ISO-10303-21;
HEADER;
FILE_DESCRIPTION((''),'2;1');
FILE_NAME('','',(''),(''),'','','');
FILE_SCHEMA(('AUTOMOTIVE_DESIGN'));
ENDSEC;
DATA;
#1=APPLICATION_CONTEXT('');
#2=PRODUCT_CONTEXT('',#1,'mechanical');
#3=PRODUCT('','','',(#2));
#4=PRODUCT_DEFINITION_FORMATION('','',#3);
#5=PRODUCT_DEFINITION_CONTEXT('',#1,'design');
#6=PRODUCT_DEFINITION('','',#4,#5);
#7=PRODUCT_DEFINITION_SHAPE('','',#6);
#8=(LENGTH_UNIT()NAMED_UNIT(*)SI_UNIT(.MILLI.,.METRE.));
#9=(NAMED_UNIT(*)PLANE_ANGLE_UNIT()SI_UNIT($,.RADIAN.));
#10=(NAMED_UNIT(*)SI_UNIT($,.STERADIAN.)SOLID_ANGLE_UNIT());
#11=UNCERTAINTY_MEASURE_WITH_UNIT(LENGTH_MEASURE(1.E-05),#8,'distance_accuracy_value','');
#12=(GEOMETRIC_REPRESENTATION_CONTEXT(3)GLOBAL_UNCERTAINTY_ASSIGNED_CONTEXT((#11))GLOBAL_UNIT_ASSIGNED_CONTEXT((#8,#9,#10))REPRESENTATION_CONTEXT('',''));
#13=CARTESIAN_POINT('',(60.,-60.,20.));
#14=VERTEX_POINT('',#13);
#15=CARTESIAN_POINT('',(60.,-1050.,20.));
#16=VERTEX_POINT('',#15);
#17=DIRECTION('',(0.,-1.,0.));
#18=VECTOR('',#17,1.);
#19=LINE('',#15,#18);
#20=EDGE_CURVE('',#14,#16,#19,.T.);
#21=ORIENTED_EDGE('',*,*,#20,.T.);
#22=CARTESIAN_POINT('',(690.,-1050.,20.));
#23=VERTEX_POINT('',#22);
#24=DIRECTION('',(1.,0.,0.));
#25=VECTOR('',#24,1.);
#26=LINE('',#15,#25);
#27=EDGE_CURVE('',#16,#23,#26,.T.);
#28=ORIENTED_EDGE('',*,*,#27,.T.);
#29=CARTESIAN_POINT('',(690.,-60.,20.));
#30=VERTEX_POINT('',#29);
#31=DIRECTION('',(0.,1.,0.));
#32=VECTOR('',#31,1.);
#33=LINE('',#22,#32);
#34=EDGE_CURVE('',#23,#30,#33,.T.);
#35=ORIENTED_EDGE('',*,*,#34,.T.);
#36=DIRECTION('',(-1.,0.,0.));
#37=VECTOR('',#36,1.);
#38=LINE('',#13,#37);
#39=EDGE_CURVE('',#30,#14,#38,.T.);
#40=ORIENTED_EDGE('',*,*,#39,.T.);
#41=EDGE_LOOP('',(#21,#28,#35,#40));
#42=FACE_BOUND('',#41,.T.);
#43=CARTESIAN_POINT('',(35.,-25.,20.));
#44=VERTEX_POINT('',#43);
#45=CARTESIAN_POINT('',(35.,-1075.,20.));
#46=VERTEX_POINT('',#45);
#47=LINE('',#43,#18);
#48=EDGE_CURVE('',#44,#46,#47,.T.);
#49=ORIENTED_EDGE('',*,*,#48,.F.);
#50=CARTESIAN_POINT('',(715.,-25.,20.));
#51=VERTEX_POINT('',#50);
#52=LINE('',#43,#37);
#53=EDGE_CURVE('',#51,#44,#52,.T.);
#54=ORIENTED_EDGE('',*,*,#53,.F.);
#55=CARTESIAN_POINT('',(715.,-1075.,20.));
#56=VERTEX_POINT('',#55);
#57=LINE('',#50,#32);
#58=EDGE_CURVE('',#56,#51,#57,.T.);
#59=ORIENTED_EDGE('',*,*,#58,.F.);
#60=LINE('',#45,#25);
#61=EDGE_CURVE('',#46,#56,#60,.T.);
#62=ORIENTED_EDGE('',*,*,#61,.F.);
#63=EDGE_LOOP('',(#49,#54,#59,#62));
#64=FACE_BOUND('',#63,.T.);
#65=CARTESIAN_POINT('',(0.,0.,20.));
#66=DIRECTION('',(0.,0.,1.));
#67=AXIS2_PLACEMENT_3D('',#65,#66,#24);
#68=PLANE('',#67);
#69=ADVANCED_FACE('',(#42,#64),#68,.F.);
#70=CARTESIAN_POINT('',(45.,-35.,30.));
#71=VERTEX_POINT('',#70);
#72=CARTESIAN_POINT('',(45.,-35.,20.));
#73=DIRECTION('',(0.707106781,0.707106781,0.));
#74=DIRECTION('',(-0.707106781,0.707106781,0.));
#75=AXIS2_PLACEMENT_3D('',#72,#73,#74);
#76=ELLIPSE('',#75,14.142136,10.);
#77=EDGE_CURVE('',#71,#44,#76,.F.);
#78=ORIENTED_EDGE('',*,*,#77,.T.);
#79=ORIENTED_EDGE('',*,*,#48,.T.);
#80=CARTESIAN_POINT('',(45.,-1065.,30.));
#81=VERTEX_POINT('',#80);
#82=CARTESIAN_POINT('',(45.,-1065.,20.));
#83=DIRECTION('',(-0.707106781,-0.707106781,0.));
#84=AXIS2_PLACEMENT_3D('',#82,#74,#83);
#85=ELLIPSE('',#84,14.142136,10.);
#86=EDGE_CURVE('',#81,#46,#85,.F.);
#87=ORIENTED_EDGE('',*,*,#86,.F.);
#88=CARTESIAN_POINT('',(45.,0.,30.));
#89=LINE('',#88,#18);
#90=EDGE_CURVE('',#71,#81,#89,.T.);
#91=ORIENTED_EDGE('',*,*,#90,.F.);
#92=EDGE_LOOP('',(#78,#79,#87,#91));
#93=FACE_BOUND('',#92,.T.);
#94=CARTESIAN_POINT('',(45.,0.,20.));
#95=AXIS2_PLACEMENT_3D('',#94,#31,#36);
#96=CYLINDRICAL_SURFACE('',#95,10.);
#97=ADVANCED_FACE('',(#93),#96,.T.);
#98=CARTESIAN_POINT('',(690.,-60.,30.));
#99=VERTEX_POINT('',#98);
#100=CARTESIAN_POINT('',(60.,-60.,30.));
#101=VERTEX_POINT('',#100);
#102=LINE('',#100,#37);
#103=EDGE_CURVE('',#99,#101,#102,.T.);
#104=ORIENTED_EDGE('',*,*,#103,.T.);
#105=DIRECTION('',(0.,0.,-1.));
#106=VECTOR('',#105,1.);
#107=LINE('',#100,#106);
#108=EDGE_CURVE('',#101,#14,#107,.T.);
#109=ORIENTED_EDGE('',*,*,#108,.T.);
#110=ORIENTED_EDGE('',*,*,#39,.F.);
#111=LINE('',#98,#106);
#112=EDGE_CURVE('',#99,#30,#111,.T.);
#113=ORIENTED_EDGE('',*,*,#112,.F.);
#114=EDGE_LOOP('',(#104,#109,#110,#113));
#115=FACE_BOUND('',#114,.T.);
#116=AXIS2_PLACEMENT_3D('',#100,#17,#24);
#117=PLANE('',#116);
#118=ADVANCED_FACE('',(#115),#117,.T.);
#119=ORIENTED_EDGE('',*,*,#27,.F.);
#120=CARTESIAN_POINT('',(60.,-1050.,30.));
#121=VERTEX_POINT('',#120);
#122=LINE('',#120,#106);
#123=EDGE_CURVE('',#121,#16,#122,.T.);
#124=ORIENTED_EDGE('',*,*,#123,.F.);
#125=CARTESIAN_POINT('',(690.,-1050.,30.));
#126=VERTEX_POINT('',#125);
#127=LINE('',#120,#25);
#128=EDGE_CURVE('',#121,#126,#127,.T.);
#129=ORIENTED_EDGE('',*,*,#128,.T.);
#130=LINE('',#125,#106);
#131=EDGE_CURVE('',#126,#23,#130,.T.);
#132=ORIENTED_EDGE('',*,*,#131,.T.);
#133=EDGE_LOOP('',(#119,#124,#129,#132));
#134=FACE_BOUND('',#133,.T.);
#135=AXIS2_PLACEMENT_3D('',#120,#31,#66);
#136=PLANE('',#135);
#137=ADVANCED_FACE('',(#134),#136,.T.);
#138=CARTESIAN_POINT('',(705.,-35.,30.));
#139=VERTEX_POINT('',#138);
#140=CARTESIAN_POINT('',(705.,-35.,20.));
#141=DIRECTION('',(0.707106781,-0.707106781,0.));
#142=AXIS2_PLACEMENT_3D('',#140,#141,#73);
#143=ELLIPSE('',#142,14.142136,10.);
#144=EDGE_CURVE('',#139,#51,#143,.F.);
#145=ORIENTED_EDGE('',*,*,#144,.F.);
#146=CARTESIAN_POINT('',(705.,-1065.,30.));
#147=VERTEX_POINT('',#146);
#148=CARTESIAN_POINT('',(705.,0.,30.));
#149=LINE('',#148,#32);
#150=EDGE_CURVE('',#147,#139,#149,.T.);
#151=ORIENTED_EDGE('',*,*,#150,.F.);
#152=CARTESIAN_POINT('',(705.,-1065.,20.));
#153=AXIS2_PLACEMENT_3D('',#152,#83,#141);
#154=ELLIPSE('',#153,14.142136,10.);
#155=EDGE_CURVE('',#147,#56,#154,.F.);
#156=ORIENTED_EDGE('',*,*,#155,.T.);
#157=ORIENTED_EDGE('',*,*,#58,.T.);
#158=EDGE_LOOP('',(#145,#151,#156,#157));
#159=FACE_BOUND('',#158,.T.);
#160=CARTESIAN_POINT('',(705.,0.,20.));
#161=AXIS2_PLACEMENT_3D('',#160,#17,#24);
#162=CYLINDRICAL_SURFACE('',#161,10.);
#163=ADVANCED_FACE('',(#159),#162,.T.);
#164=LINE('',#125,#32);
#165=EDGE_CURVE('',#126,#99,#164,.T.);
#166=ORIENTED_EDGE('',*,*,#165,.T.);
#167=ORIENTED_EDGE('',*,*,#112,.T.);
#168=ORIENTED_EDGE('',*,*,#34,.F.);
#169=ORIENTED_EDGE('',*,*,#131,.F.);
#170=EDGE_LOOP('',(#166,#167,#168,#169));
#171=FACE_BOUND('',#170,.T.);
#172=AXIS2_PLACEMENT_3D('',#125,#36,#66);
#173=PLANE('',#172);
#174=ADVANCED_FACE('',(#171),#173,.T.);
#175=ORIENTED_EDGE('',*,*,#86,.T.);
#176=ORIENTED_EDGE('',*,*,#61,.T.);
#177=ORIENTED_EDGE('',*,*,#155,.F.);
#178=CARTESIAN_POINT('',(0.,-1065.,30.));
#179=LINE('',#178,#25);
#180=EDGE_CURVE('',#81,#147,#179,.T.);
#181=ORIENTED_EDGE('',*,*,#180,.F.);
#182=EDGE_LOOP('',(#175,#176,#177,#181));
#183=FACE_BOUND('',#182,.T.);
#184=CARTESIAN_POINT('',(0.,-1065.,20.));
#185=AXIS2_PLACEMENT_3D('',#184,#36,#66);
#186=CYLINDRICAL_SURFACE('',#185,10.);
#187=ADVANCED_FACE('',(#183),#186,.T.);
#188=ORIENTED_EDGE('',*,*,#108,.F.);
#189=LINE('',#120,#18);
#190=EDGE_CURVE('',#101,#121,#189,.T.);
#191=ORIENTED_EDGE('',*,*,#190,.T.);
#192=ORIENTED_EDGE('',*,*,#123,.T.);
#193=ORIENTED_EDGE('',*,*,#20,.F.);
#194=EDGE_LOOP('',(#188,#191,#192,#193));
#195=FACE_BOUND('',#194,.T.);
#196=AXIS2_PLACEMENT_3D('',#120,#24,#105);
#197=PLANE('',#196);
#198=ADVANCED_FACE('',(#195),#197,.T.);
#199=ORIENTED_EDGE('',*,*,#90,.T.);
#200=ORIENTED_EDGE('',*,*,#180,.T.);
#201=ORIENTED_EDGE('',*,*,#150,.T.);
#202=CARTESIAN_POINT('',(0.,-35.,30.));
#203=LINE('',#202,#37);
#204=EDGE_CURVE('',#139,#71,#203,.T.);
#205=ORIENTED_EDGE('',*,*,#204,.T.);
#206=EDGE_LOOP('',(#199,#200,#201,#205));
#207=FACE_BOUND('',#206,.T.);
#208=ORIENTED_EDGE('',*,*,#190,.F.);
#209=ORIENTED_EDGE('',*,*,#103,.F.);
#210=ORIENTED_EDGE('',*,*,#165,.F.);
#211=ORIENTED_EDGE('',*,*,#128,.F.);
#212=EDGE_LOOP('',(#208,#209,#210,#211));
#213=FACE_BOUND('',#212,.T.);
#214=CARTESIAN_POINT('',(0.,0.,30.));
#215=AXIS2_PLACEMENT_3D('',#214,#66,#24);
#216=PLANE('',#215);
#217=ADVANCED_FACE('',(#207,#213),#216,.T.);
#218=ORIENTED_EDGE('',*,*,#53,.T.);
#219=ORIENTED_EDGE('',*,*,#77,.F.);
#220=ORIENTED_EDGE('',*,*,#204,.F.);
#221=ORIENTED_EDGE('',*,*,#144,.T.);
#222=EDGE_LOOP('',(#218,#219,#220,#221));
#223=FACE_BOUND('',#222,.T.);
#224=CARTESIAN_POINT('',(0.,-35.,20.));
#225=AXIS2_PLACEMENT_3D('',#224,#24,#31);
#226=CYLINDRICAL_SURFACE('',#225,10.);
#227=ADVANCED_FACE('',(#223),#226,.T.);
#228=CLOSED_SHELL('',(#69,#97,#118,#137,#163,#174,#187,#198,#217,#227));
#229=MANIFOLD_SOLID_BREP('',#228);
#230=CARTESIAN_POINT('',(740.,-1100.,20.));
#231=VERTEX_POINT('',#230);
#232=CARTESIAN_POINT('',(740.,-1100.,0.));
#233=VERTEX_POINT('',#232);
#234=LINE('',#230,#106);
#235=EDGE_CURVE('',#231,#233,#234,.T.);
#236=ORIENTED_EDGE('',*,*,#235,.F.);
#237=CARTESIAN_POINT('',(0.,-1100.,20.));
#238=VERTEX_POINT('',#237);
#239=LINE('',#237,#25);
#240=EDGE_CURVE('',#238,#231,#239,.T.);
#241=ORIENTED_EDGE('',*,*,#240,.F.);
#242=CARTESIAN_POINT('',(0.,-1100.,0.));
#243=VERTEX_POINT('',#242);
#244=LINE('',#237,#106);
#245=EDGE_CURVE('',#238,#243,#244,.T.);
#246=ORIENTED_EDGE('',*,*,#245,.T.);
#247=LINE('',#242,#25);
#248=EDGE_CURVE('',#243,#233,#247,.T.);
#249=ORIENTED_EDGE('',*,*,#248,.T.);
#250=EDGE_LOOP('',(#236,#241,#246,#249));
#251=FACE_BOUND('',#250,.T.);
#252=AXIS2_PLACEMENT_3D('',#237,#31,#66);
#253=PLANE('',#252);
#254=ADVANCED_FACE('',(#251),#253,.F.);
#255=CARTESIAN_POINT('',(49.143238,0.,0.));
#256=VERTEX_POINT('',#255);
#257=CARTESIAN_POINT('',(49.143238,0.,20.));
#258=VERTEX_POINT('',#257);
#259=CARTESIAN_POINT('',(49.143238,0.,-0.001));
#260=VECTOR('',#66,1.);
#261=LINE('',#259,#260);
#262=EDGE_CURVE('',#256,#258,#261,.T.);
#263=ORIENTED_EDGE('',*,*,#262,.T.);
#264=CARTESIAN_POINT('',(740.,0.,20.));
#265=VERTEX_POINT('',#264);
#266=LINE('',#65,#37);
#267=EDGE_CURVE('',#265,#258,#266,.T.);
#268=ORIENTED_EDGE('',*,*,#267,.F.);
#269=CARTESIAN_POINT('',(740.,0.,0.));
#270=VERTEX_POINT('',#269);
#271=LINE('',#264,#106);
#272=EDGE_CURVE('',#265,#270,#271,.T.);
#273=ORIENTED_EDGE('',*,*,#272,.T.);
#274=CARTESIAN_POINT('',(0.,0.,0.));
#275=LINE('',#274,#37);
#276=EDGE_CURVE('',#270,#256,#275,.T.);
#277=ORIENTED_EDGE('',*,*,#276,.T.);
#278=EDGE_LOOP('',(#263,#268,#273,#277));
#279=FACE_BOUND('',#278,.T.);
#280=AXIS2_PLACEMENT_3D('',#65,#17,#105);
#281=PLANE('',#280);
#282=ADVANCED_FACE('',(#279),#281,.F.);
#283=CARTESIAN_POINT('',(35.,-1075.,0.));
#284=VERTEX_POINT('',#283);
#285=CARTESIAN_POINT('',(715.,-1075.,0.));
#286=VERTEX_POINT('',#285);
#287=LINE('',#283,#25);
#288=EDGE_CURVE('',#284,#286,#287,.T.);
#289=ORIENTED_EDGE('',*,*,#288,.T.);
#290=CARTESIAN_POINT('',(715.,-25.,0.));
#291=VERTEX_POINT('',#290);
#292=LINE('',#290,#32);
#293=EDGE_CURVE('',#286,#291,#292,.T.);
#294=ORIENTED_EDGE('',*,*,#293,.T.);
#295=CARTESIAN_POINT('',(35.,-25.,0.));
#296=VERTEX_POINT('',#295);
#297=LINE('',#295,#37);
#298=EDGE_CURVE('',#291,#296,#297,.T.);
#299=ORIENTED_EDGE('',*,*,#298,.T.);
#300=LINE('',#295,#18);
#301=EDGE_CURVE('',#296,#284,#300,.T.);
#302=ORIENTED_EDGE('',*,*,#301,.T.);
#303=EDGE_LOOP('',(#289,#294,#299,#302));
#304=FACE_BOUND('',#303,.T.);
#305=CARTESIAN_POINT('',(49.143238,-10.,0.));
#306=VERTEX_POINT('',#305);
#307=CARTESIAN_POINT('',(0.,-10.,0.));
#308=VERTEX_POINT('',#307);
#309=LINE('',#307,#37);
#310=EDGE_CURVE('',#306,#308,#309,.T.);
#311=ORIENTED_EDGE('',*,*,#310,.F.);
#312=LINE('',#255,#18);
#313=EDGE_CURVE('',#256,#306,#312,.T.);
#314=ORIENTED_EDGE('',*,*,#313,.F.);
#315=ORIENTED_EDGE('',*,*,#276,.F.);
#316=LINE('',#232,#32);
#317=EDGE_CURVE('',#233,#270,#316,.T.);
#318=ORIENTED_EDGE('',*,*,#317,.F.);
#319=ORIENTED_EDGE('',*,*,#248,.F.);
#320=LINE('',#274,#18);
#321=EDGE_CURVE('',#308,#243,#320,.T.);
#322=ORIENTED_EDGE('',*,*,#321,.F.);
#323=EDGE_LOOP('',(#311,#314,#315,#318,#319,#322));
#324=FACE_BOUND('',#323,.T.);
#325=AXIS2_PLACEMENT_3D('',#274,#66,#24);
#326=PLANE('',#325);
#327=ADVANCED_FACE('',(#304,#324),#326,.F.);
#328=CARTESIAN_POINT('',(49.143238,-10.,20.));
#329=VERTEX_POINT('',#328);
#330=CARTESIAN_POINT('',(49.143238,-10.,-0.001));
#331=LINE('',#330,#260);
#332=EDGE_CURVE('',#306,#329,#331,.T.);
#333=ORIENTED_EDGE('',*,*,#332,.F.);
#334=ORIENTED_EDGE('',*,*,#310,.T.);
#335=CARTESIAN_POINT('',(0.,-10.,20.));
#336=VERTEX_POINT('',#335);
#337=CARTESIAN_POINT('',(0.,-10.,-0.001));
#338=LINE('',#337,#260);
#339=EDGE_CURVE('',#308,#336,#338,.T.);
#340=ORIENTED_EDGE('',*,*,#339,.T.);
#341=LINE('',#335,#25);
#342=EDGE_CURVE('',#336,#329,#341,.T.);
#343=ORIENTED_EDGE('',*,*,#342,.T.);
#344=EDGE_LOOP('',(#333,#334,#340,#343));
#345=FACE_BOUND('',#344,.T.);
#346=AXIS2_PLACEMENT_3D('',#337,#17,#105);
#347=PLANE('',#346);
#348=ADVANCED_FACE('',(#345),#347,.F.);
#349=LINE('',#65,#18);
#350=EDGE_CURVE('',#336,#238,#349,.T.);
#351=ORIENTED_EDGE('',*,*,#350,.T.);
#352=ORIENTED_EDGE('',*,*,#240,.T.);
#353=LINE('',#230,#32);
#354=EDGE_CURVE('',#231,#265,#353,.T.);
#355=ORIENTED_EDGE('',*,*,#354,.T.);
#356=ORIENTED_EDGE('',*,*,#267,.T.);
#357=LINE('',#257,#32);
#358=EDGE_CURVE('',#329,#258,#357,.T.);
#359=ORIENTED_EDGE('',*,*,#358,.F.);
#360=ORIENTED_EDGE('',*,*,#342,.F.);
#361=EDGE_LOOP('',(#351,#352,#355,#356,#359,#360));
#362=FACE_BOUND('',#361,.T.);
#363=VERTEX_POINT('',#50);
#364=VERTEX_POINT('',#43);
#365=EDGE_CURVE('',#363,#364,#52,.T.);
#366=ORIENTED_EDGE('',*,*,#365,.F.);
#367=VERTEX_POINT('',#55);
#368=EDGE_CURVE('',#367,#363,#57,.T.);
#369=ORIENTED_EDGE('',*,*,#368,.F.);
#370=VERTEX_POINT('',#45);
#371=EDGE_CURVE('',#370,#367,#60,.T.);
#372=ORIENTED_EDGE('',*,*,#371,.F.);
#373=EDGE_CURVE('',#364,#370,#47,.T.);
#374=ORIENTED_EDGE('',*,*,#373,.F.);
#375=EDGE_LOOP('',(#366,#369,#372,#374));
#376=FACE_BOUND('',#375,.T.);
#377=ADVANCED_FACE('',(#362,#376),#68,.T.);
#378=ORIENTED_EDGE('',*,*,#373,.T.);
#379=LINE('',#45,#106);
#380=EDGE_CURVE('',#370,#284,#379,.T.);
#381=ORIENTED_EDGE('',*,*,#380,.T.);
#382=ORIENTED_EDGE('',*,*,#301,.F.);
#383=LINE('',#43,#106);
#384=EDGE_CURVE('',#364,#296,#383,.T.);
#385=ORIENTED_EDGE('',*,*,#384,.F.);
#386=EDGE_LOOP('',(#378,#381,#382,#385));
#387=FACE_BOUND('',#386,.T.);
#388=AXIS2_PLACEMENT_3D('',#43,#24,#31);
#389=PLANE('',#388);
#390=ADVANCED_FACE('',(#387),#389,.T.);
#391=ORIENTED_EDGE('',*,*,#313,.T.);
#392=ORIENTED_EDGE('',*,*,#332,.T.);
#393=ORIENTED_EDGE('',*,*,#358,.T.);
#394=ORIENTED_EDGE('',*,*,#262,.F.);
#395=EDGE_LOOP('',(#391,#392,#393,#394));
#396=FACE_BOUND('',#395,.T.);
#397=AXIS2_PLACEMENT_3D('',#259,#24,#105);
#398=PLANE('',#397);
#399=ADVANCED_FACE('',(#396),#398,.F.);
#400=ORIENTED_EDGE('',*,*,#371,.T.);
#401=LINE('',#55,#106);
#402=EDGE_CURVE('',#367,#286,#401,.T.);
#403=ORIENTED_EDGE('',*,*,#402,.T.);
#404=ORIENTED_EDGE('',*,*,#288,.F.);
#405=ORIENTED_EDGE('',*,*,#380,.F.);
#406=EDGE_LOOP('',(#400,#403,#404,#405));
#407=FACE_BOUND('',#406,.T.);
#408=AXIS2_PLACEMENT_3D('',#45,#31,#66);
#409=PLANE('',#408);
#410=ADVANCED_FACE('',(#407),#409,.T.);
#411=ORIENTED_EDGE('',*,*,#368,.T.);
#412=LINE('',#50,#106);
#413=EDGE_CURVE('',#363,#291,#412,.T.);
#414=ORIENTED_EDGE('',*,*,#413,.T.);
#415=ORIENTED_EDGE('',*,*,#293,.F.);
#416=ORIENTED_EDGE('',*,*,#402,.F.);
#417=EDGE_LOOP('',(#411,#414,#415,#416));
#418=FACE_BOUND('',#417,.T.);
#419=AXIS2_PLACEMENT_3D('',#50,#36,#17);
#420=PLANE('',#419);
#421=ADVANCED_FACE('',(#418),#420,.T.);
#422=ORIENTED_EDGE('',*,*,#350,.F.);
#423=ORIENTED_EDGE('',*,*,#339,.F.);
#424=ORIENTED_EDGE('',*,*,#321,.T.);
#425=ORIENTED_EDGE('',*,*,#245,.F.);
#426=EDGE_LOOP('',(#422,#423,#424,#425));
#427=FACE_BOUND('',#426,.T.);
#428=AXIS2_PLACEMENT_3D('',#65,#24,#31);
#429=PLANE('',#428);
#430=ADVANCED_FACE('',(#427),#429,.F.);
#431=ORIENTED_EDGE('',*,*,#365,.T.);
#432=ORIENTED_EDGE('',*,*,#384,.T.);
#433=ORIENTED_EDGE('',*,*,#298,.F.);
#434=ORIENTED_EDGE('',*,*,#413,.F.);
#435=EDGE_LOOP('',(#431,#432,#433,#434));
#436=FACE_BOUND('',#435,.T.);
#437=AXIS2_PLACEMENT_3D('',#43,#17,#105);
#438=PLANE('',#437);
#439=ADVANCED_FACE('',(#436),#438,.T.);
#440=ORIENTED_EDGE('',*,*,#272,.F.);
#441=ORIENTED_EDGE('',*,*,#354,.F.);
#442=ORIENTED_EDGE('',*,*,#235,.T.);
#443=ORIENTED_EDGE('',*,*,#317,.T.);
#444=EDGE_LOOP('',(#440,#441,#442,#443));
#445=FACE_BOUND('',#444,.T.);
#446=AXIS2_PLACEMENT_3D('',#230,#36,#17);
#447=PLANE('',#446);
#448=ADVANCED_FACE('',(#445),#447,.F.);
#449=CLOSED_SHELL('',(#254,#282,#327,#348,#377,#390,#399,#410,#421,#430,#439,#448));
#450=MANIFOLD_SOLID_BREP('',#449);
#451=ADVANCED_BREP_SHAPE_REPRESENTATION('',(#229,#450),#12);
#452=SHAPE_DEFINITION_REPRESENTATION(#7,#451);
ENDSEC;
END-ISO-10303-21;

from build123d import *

# Parameters (mm, degrees)
ESBO_O2_W                = 740
ESBO_O2_H                = 1100
ESBO_O2_W_2              = 680
ESBO_O2_H_2              = 1050
RESSALTO_EXTRUS_O1_DEPTH = 20
ESBO_O3_W                = 680
ESBO_O3_H                = 1050
ESBO_O3_W_2              = 630
ESBO_O3_H_2              = 990
RESSALTO_EXTRUS_O2_DEPTH = 10
FILETE1_R                = 10
ESBO_O4_W                = 49.143238
ESBO_O4_H                = 10
CORTE_EXTRUS_O1_DEPTH    = 20


with BuildPart() as part:
    # Esboço2 → Ressalto-extrusão1 (new body)
    with BuildSketch(Plane.XY):
        with Locations((370, -550)):
            Rectangle(ESBO_O2_W, ESBO_O2_H)
        with Locations((375, -550)):
            Rectangle(ESBO_O2_W_2, ESBO_O2_H_2, mode=Mode.SUBTRACT)
    extrude(amount=RESSALTO_EXTRUS_O1_DEPTH)

    # Esboço4 → Corte-extrusão1 (cut)
    with BuildSketch(Plane.XY.offset(20)):
        with Locations((24.571619, -5)):
            Rectangle(ESBO_O4_W, ESBO_O4_H)
    extrude(amount=-CORTE_EXTRUS_O1_DEPTH, mode=Mode.SUBTRACT)


with BuildPart() as body_2:
    # Esboço3 → Ressalto-extrusão2 (new body)
    with BuildSketch(Plane.XY.offset(20)):
        with Locations((375, -550)):
            Rectangle(ESBO_O3_W, ESBO_O3_H)
        with Locations((375, -555)):
            Rectangle(ESBO_O3_W_2, ESBO_O3_H_2, mode=Mode.SUBTRACT)
    extrude(amount=RESSALTO_EXTRUS_O2_DEPTH)

    # Filete1
    filete1_edges = [body_2.edges().sort_by_distance(p)[0] for p in [
        (715, -550, 30),
        (375, -25, 30),
        (35, -550, 30),
        (375, -1075, 30),
    ]]
    fillet(filete1_edges, radius=FILETE1_R - 0.0001)  # a hair under: the kernel refuses the full size


solid = Compound([part.part, body_2.part])
